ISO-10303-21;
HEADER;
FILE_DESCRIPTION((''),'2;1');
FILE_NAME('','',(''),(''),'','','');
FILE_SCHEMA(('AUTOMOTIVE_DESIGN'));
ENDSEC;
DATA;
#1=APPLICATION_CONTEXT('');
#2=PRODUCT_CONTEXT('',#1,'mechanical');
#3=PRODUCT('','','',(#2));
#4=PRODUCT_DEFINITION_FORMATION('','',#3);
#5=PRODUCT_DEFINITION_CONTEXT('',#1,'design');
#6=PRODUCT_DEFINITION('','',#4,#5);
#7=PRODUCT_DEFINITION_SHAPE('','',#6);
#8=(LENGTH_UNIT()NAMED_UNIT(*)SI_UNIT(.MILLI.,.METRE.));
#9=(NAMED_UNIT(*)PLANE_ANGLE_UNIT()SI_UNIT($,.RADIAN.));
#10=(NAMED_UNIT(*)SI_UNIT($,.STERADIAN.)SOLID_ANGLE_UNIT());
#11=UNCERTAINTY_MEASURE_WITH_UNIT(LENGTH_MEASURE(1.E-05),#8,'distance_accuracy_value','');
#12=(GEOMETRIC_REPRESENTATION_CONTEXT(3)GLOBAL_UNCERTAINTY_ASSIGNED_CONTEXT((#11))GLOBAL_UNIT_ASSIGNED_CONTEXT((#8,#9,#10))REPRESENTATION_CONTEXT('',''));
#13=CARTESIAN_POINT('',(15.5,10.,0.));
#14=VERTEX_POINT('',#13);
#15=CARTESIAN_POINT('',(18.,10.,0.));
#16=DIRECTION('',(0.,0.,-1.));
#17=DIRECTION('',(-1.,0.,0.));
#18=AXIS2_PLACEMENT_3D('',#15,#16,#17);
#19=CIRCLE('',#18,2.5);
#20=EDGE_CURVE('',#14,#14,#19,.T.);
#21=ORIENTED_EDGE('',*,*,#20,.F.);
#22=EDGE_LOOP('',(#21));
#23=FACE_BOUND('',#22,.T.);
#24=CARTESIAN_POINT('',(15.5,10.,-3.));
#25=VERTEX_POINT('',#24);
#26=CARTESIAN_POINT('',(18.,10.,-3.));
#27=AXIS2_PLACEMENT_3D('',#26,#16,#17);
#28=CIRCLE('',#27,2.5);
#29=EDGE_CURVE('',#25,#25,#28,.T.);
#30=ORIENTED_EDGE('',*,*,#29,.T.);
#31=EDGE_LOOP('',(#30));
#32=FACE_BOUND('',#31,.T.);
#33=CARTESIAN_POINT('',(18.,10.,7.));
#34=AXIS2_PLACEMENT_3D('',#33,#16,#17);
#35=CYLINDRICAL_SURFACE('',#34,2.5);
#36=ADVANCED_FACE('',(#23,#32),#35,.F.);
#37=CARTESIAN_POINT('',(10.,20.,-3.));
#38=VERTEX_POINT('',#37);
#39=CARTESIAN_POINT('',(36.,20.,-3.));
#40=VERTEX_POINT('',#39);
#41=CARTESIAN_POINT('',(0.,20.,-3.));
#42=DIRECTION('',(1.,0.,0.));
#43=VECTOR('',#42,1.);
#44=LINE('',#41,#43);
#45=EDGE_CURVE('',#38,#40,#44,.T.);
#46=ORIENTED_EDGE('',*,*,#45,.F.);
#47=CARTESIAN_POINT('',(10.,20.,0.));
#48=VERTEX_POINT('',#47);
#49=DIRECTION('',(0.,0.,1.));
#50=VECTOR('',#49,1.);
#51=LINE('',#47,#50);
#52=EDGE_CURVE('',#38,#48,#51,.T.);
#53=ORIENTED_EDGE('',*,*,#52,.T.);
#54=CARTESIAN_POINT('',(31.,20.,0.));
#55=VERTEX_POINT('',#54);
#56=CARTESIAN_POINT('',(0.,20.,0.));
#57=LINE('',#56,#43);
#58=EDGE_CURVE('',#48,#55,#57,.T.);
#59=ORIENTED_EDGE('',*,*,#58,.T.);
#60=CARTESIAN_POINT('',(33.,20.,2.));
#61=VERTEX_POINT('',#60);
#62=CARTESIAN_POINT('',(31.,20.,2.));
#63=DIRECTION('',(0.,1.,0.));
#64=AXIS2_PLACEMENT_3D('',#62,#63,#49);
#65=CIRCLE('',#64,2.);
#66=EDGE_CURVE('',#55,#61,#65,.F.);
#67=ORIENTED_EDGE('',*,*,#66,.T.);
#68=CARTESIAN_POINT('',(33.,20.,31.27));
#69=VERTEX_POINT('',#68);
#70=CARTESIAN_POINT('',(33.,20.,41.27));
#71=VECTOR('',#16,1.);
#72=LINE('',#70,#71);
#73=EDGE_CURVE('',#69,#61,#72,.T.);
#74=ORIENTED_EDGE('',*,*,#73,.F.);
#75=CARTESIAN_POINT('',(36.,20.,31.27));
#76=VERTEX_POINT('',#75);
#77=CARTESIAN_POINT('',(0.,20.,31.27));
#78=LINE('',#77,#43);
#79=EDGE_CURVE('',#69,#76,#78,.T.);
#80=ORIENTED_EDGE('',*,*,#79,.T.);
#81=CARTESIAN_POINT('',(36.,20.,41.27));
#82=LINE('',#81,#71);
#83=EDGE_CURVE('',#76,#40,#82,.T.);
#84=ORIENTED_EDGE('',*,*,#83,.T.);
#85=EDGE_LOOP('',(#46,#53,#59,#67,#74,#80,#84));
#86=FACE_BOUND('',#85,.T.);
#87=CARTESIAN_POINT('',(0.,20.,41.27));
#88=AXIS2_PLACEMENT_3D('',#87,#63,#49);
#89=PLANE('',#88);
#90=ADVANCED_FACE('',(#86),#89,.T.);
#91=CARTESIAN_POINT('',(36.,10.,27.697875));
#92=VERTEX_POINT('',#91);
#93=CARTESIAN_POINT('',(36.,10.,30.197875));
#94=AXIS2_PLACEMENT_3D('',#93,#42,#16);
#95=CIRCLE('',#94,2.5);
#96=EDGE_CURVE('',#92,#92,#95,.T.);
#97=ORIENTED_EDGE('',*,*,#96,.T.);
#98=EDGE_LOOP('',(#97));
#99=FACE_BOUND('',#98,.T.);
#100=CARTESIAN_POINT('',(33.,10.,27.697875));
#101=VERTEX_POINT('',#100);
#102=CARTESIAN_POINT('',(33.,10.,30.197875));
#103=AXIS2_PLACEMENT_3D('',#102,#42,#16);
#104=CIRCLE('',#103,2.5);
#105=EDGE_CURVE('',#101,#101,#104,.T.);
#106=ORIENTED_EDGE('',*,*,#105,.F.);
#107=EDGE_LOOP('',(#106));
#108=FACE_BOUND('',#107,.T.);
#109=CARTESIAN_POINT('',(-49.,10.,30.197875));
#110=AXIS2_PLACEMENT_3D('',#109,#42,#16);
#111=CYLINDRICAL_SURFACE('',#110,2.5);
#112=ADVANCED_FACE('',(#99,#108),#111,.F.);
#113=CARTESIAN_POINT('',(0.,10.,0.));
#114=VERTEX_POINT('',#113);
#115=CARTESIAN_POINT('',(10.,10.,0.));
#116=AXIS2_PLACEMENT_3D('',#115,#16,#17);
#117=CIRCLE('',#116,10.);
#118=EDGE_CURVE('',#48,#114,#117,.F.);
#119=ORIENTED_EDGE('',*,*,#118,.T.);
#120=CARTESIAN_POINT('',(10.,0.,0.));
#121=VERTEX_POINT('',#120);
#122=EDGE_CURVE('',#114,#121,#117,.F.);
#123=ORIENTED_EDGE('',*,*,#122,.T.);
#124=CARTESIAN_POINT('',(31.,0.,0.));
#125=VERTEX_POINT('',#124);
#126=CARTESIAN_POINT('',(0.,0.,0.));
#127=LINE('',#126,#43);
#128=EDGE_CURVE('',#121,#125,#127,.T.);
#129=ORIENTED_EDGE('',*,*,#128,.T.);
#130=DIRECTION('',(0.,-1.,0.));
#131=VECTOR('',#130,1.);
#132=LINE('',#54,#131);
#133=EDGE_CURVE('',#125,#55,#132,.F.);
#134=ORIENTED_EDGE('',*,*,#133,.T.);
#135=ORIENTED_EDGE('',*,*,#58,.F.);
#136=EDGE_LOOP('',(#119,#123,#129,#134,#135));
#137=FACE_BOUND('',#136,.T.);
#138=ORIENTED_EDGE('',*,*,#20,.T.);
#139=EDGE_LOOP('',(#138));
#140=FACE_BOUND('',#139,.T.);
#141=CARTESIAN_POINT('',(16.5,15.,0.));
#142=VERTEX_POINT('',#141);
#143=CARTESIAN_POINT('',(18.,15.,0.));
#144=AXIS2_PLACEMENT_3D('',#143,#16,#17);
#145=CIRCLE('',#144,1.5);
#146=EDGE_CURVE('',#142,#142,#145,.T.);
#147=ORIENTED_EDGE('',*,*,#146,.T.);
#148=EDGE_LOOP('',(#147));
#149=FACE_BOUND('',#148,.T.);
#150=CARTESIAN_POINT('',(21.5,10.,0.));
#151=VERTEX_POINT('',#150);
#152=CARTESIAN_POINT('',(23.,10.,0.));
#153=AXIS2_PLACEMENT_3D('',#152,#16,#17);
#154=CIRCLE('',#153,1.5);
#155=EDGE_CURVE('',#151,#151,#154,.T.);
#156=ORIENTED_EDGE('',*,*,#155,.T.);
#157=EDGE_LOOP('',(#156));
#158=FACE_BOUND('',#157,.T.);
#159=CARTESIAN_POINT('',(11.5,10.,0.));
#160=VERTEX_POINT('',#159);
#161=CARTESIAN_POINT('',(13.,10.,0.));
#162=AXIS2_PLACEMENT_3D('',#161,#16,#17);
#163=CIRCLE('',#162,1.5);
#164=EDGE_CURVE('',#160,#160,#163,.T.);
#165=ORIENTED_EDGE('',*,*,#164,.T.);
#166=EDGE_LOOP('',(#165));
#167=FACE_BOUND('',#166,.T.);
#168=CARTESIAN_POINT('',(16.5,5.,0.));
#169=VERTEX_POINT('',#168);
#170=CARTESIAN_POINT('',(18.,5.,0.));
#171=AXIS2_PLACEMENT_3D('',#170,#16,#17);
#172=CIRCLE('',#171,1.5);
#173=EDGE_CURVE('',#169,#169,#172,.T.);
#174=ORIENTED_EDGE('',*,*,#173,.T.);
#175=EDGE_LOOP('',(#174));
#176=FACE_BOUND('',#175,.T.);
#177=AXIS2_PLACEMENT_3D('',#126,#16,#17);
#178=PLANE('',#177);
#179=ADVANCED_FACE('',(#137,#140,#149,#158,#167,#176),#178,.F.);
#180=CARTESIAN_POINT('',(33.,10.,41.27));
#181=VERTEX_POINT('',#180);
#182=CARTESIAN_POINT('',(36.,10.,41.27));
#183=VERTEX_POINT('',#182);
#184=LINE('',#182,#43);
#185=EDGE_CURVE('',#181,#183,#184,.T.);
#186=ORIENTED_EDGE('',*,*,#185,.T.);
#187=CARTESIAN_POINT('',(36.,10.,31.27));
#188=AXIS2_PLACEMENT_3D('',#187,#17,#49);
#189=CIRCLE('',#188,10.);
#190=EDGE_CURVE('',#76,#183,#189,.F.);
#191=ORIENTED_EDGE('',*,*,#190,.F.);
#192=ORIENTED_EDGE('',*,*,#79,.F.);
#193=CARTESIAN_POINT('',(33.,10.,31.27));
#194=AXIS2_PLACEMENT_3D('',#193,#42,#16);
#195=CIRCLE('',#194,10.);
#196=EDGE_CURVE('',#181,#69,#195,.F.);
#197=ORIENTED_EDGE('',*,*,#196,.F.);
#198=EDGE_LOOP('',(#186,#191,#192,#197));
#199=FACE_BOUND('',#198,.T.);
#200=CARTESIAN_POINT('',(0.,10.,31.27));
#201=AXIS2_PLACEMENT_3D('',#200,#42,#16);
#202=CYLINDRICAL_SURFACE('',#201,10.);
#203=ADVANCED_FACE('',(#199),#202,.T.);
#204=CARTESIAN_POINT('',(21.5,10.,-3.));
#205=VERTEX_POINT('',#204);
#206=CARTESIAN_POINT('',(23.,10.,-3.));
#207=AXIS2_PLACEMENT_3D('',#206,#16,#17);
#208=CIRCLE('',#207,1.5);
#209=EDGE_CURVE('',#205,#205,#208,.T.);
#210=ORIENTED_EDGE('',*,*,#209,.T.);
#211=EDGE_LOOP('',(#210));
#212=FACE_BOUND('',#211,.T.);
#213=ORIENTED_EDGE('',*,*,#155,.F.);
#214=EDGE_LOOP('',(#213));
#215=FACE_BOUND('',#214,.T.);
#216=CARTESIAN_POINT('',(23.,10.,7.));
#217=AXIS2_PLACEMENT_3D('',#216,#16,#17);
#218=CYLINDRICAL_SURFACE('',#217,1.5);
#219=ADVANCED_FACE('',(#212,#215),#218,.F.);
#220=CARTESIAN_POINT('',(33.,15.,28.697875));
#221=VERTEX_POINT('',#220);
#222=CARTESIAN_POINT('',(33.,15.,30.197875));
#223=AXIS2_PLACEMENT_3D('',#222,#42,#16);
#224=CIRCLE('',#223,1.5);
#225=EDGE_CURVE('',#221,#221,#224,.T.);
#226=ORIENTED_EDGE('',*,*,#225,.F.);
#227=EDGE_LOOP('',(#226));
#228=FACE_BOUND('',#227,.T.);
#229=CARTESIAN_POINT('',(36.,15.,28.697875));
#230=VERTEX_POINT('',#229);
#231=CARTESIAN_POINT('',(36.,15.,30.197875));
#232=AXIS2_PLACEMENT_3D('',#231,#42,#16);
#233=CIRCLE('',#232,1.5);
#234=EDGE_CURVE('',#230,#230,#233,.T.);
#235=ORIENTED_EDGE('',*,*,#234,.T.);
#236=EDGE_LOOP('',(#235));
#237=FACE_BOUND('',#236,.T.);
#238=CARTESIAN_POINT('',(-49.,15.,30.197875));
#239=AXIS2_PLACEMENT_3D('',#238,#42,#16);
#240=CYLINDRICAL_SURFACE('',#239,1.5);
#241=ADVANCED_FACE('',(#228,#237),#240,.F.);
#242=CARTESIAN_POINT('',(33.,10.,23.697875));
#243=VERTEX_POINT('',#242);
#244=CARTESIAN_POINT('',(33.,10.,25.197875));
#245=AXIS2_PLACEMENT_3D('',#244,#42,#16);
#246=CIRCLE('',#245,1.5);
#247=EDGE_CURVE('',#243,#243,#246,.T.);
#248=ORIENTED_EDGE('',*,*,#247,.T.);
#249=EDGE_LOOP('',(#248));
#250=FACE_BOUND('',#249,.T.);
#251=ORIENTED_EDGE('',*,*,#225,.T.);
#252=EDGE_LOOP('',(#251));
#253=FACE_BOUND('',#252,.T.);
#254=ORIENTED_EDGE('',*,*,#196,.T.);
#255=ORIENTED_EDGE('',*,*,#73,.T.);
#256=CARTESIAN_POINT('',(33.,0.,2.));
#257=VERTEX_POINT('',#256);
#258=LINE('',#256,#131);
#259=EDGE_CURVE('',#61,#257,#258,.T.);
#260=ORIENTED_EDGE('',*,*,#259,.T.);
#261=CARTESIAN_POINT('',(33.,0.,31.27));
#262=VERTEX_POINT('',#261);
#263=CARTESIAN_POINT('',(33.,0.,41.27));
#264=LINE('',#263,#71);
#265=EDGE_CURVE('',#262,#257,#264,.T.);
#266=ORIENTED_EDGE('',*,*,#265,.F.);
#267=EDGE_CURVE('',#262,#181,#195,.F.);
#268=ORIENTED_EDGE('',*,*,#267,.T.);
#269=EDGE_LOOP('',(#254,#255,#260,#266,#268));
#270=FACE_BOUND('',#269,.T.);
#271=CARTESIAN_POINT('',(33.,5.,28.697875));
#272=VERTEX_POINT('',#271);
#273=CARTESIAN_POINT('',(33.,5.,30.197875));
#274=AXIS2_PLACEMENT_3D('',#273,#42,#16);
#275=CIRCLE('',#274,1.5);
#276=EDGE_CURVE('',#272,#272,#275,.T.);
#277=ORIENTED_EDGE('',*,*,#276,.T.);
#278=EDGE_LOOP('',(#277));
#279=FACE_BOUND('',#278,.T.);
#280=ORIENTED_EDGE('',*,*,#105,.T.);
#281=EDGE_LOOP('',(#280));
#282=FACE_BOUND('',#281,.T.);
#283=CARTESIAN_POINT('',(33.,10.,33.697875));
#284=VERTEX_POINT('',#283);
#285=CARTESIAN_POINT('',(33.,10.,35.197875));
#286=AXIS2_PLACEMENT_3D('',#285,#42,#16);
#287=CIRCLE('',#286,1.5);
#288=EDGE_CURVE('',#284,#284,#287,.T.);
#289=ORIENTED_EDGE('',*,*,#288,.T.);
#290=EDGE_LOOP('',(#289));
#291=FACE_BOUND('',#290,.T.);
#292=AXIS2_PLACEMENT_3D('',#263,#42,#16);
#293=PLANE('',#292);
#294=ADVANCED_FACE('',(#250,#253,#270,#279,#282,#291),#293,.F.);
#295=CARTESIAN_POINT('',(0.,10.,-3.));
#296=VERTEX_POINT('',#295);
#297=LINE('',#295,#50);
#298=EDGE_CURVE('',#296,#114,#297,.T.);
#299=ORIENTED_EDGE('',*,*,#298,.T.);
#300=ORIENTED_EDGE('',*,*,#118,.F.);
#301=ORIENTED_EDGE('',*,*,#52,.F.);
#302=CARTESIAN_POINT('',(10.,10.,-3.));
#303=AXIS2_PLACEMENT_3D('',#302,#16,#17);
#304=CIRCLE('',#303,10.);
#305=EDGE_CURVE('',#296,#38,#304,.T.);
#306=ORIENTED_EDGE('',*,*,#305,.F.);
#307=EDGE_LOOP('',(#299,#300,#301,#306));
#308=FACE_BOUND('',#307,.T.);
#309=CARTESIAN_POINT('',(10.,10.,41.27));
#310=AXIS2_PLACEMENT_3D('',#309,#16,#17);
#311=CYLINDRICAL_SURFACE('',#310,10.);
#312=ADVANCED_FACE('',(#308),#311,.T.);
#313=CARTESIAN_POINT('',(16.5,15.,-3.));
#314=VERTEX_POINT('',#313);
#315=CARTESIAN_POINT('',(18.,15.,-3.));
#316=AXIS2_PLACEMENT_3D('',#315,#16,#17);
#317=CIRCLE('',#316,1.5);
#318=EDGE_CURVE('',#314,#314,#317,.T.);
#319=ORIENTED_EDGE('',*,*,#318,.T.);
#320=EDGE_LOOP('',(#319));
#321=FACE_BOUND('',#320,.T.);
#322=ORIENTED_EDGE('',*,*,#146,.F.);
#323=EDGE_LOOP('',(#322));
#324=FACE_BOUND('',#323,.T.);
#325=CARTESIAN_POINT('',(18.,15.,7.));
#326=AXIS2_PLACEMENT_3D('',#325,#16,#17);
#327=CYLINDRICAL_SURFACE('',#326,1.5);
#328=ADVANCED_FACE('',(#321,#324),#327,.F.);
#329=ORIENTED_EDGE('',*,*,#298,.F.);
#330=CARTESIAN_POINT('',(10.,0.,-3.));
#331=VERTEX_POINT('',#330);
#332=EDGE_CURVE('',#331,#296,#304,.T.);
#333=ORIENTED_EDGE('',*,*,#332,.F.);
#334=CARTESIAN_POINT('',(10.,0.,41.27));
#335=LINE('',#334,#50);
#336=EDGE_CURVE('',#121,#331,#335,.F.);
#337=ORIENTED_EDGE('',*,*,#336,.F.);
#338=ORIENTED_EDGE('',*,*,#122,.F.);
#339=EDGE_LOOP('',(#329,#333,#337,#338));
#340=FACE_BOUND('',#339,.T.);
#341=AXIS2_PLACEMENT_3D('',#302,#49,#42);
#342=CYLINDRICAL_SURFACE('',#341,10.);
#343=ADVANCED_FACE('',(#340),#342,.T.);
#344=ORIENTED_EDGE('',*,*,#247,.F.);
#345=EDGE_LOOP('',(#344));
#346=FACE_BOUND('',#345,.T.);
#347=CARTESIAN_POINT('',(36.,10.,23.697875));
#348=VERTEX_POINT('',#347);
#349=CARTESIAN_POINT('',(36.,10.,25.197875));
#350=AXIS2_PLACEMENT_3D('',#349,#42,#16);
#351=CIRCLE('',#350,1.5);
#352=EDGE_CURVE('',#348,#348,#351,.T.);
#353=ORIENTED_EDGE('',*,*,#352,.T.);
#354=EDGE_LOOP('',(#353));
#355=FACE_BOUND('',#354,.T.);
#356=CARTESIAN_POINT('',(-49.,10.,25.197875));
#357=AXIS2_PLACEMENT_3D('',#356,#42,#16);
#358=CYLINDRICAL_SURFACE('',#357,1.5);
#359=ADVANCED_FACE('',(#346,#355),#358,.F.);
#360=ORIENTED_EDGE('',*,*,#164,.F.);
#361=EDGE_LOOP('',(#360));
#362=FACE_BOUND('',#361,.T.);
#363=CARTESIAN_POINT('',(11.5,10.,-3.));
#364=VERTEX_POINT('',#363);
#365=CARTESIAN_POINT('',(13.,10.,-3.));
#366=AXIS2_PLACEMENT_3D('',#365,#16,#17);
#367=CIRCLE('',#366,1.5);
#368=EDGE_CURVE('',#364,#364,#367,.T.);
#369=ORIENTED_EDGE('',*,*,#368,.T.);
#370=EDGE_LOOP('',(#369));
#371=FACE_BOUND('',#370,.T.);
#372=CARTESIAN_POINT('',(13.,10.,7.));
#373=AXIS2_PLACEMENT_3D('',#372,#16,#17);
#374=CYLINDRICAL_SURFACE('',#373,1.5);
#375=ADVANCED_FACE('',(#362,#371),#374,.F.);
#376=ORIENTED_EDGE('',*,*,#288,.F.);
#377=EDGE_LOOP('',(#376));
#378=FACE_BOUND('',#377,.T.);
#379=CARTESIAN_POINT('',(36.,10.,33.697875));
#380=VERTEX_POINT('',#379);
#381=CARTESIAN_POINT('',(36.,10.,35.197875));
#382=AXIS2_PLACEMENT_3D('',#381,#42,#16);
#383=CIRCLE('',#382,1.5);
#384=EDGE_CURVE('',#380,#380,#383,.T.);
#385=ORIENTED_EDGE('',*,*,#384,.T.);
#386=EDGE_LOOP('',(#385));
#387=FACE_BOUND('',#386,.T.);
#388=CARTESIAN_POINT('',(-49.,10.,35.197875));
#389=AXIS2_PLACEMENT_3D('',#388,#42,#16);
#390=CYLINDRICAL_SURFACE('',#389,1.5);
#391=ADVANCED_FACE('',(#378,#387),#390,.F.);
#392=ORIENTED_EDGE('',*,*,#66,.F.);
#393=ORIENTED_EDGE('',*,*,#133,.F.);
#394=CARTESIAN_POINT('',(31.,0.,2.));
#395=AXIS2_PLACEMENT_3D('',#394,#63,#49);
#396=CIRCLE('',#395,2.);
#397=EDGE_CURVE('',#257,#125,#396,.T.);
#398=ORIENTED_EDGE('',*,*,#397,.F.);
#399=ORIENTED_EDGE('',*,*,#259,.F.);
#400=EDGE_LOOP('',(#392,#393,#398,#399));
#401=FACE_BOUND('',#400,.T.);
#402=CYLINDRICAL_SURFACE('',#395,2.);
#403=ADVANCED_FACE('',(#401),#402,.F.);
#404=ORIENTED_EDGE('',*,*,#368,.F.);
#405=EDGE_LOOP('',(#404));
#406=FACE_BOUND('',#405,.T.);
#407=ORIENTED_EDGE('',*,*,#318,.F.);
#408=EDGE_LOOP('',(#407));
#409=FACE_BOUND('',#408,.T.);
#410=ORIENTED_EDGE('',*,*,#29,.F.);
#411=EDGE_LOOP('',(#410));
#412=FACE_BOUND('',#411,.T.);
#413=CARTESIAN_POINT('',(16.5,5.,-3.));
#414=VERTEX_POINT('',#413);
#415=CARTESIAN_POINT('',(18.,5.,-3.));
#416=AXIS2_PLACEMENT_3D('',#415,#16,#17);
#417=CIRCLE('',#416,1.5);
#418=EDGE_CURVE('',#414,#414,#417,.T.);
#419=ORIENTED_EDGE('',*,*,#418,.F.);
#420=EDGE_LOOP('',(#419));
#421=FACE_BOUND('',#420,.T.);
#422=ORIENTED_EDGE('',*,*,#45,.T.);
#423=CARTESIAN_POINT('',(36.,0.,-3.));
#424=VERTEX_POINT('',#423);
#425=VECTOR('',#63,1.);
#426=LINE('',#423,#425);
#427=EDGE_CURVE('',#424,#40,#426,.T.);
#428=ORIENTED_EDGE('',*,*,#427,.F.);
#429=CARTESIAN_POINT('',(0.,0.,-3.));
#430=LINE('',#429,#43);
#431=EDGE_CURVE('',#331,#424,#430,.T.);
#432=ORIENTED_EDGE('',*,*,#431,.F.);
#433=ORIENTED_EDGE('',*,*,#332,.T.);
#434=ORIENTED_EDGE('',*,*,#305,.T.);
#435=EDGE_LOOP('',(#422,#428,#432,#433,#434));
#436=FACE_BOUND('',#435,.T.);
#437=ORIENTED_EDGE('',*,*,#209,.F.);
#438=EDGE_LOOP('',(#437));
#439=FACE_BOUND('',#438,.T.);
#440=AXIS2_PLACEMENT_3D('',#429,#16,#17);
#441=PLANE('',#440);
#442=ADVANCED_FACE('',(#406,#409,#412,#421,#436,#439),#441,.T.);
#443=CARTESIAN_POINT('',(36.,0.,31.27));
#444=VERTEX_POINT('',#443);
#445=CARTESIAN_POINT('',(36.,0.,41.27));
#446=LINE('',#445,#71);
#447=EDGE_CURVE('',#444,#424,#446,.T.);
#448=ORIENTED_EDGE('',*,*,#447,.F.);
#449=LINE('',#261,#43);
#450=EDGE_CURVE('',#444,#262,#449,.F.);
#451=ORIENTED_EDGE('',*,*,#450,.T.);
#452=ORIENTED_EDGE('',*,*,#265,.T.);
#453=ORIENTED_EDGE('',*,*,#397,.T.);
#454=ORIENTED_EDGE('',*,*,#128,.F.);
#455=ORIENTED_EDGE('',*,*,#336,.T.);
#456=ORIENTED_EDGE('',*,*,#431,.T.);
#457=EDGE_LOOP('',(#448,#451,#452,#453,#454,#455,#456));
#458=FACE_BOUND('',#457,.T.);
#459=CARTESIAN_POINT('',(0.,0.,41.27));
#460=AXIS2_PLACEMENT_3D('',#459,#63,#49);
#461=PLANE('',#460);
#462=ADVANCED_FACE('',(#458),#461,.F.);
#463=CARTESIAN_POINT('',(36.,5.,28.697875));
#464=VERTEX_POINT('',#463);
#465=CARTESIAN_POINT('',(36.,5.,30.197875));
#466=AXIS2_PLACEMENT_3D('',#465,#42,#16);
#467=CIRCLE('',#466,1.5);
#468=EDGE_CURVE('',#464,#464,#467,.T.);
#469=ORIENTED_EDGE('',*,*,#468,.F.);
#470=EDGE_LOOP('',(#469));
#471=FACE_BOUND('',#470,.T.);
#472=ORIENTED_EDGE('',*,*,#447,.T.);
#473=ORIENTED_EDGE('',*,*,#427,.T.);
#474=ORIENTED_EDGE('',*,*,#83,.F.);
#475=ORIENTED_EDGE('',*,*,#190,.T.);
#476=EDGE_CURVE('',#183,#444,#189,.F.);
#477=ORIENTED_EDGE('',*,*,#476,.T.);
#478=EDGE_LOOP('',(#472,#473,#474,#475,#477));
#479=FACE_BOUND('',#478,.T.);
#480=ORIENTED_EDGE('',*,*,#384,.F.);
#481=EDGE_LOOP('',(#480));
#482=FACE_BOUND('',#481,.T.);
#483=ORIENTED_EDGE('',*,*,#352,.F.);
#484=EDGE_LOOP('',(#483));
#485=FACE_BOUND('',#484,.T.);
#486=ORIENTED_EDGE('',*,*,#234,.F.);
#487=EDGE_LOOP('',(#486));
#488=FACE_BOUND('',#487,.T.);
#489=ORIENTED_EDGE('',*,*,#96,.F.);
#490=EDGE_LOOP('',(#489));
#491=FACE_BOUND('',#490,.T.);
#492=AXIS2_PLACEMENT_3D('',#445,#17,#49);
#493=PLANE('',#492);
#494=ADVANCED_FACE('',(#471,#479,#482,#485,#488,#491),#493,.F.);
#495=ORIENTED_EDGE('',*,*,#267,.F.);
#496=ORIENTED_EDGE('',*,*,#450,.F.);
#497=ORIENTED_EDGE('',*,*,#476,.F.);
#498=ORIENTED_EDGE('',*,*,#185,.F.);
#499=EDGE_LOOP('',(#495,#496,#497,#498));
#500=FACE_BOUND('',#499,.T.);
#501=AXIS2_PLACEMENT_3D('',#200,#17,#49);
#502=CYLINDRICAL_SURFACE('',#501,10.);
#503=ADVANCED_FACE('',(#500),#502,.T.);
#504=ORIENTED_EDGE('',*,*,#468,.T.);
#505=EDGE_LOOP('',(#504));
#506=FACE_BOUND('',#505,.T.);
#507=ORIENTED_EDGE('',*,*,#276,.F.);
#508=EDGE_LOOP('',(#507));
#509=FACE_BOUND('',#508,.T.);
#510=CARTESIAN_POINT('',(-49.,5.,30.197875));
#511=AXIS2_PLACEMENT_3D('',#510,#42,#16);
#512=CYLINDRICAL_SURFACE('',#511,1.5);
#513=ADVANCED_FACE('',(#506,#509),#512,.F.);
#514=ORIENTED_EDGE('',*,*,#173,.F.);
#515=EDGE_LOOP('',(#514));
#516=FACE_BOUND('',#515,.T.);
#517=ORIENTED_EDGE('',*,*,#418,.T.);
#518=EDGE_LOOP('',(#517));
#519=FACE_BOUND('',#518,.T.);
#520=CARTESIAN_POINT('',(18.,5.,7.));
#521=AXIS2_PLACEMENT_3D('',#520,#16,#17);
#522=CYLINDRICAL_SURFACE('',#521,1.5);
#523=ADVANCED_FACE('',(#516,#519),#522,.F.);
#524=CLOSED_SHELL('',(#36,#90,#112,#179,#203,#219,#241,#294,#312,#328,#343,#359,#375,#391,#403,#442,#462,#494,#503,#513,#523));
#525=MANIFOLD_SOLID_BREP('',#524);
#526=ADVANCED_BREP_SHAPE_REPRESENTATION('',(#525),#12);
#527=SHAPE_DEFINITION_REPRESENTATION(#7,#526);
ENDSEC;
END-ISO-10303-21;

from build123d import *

# Parameters (mm, degrees)
ESQUISSE1_W             = 3
ESQUISSE1_H             = 20
BOSS_EXTRU_1_DEPTH      = 41.27
ESQUISSE1_3_W           = 36
ESQUISSE1_3_H           = 20
BOSS_EXTRU_2_DEPTH      = 3
ESQUISSE3_R             = 1.5
ESQUISSE3_R_2           = 2.5
ENL_V_MAT_EXTRU_2_DEPTH = 85
CONG_2_R                = 2
CONG_3_R                = 10
ESQUISSE7_R             = 1.5
ESQUISSE7_R_2           = 2.5
ENL_V_MAT_EXTRU_3_DEPTH = 10


with BuildPart() as part:
    # Esquisse1 → Boss.-Extru.1 (new body)
    with BuildSketch(Plane.XY):
        with Locations((34.5, 10)):
            Rectangle(ESQUISSE1_W, ESQUISSE1_H)
    extrude(amount=BOSS_EXTRU_1_DEPTH)

    # Esquisse1<3> → Boss.-Extru.2 (add)
    with BuildSketch(Plane.XY):
        with Locations((18, 10)):
            Rectangle(ESQUISSE1_3_W, ESQUISSE1_3_H)
    extrude(amount=-BOSS_EXTRU_2_DEPTH)

    # Esquisse3 → Enlèv. mat.-Extru.2 (cut)
    with BuildSketch(Plane(origin=(36, 0, 0), x_dir=(0, 0, -1), z_dir=(1, 0, 0))):
        with Locations((-30.197874881, 15)):
            Circle(ESQUISSE3_R)
        with Locations((-30.197874881, 5)):
            Circle(ESQUISSE3_R)
        with Locations((-35.197874881, 10)):
            Circle(ESQUISSE3_R)
        with Locations((-25.197874881, 10)):
            Circle(ESQUISSE3_R)
        with Locations((-30.197874881, 10)):
            Circle(ESQUISSE3_R_2)
    extrude(amount=-ENL_V_MAT_EXTRU_2_DEPTH, mode=Mode.SUBTRACT)

    # Congé2
    cong_2_edges = [part.edges().sort_by_distance(p)[0] for p in [
        (33, 10, 0),
    ]]
    fillet(cong_2_edges, radius=CONG_2_R)

    # Congé3
    cong_3_edges = [part.edges().sort_by_distance(p)[0] for p in [
        (0, 20, -1.5),
        (0, 0, -1.5),
        (34.5, 20, 41.27),
        (34.5, 0, 41.27),
    ]]
    fillet(cong_3_edges, radius=CONG_3_R - 0.0001)  # a hair under: the kernel refuses the full size

    # Esquisse7 → Enlèv. mat.-Extru.3 (cut)
    with BuildSketch(Plane(origin=(0, 0, -3), x_dir=(-1, 0, 0), z_dir=(0, 0, -1))):
        with Locations((-23, 10)):
            Circle(ESQUISSE7_R)
        with Locations((-18, 15)):
            Circle(ESQUISSE7_R)
        with Locations((-13, 10)):
            Circle(ESQUISSE7_R)
        with Locations((-18, 5)):
            Circle(ESQUISSE7_R)
        with Locations((-18, 10)):
            Circle(ESQUISSE7_R_2)
    extrude(amount=-ENL_V_MAT_EXTRU_3_DEPTH, mode=Mode.SUBTRACT)


solid = part.part
